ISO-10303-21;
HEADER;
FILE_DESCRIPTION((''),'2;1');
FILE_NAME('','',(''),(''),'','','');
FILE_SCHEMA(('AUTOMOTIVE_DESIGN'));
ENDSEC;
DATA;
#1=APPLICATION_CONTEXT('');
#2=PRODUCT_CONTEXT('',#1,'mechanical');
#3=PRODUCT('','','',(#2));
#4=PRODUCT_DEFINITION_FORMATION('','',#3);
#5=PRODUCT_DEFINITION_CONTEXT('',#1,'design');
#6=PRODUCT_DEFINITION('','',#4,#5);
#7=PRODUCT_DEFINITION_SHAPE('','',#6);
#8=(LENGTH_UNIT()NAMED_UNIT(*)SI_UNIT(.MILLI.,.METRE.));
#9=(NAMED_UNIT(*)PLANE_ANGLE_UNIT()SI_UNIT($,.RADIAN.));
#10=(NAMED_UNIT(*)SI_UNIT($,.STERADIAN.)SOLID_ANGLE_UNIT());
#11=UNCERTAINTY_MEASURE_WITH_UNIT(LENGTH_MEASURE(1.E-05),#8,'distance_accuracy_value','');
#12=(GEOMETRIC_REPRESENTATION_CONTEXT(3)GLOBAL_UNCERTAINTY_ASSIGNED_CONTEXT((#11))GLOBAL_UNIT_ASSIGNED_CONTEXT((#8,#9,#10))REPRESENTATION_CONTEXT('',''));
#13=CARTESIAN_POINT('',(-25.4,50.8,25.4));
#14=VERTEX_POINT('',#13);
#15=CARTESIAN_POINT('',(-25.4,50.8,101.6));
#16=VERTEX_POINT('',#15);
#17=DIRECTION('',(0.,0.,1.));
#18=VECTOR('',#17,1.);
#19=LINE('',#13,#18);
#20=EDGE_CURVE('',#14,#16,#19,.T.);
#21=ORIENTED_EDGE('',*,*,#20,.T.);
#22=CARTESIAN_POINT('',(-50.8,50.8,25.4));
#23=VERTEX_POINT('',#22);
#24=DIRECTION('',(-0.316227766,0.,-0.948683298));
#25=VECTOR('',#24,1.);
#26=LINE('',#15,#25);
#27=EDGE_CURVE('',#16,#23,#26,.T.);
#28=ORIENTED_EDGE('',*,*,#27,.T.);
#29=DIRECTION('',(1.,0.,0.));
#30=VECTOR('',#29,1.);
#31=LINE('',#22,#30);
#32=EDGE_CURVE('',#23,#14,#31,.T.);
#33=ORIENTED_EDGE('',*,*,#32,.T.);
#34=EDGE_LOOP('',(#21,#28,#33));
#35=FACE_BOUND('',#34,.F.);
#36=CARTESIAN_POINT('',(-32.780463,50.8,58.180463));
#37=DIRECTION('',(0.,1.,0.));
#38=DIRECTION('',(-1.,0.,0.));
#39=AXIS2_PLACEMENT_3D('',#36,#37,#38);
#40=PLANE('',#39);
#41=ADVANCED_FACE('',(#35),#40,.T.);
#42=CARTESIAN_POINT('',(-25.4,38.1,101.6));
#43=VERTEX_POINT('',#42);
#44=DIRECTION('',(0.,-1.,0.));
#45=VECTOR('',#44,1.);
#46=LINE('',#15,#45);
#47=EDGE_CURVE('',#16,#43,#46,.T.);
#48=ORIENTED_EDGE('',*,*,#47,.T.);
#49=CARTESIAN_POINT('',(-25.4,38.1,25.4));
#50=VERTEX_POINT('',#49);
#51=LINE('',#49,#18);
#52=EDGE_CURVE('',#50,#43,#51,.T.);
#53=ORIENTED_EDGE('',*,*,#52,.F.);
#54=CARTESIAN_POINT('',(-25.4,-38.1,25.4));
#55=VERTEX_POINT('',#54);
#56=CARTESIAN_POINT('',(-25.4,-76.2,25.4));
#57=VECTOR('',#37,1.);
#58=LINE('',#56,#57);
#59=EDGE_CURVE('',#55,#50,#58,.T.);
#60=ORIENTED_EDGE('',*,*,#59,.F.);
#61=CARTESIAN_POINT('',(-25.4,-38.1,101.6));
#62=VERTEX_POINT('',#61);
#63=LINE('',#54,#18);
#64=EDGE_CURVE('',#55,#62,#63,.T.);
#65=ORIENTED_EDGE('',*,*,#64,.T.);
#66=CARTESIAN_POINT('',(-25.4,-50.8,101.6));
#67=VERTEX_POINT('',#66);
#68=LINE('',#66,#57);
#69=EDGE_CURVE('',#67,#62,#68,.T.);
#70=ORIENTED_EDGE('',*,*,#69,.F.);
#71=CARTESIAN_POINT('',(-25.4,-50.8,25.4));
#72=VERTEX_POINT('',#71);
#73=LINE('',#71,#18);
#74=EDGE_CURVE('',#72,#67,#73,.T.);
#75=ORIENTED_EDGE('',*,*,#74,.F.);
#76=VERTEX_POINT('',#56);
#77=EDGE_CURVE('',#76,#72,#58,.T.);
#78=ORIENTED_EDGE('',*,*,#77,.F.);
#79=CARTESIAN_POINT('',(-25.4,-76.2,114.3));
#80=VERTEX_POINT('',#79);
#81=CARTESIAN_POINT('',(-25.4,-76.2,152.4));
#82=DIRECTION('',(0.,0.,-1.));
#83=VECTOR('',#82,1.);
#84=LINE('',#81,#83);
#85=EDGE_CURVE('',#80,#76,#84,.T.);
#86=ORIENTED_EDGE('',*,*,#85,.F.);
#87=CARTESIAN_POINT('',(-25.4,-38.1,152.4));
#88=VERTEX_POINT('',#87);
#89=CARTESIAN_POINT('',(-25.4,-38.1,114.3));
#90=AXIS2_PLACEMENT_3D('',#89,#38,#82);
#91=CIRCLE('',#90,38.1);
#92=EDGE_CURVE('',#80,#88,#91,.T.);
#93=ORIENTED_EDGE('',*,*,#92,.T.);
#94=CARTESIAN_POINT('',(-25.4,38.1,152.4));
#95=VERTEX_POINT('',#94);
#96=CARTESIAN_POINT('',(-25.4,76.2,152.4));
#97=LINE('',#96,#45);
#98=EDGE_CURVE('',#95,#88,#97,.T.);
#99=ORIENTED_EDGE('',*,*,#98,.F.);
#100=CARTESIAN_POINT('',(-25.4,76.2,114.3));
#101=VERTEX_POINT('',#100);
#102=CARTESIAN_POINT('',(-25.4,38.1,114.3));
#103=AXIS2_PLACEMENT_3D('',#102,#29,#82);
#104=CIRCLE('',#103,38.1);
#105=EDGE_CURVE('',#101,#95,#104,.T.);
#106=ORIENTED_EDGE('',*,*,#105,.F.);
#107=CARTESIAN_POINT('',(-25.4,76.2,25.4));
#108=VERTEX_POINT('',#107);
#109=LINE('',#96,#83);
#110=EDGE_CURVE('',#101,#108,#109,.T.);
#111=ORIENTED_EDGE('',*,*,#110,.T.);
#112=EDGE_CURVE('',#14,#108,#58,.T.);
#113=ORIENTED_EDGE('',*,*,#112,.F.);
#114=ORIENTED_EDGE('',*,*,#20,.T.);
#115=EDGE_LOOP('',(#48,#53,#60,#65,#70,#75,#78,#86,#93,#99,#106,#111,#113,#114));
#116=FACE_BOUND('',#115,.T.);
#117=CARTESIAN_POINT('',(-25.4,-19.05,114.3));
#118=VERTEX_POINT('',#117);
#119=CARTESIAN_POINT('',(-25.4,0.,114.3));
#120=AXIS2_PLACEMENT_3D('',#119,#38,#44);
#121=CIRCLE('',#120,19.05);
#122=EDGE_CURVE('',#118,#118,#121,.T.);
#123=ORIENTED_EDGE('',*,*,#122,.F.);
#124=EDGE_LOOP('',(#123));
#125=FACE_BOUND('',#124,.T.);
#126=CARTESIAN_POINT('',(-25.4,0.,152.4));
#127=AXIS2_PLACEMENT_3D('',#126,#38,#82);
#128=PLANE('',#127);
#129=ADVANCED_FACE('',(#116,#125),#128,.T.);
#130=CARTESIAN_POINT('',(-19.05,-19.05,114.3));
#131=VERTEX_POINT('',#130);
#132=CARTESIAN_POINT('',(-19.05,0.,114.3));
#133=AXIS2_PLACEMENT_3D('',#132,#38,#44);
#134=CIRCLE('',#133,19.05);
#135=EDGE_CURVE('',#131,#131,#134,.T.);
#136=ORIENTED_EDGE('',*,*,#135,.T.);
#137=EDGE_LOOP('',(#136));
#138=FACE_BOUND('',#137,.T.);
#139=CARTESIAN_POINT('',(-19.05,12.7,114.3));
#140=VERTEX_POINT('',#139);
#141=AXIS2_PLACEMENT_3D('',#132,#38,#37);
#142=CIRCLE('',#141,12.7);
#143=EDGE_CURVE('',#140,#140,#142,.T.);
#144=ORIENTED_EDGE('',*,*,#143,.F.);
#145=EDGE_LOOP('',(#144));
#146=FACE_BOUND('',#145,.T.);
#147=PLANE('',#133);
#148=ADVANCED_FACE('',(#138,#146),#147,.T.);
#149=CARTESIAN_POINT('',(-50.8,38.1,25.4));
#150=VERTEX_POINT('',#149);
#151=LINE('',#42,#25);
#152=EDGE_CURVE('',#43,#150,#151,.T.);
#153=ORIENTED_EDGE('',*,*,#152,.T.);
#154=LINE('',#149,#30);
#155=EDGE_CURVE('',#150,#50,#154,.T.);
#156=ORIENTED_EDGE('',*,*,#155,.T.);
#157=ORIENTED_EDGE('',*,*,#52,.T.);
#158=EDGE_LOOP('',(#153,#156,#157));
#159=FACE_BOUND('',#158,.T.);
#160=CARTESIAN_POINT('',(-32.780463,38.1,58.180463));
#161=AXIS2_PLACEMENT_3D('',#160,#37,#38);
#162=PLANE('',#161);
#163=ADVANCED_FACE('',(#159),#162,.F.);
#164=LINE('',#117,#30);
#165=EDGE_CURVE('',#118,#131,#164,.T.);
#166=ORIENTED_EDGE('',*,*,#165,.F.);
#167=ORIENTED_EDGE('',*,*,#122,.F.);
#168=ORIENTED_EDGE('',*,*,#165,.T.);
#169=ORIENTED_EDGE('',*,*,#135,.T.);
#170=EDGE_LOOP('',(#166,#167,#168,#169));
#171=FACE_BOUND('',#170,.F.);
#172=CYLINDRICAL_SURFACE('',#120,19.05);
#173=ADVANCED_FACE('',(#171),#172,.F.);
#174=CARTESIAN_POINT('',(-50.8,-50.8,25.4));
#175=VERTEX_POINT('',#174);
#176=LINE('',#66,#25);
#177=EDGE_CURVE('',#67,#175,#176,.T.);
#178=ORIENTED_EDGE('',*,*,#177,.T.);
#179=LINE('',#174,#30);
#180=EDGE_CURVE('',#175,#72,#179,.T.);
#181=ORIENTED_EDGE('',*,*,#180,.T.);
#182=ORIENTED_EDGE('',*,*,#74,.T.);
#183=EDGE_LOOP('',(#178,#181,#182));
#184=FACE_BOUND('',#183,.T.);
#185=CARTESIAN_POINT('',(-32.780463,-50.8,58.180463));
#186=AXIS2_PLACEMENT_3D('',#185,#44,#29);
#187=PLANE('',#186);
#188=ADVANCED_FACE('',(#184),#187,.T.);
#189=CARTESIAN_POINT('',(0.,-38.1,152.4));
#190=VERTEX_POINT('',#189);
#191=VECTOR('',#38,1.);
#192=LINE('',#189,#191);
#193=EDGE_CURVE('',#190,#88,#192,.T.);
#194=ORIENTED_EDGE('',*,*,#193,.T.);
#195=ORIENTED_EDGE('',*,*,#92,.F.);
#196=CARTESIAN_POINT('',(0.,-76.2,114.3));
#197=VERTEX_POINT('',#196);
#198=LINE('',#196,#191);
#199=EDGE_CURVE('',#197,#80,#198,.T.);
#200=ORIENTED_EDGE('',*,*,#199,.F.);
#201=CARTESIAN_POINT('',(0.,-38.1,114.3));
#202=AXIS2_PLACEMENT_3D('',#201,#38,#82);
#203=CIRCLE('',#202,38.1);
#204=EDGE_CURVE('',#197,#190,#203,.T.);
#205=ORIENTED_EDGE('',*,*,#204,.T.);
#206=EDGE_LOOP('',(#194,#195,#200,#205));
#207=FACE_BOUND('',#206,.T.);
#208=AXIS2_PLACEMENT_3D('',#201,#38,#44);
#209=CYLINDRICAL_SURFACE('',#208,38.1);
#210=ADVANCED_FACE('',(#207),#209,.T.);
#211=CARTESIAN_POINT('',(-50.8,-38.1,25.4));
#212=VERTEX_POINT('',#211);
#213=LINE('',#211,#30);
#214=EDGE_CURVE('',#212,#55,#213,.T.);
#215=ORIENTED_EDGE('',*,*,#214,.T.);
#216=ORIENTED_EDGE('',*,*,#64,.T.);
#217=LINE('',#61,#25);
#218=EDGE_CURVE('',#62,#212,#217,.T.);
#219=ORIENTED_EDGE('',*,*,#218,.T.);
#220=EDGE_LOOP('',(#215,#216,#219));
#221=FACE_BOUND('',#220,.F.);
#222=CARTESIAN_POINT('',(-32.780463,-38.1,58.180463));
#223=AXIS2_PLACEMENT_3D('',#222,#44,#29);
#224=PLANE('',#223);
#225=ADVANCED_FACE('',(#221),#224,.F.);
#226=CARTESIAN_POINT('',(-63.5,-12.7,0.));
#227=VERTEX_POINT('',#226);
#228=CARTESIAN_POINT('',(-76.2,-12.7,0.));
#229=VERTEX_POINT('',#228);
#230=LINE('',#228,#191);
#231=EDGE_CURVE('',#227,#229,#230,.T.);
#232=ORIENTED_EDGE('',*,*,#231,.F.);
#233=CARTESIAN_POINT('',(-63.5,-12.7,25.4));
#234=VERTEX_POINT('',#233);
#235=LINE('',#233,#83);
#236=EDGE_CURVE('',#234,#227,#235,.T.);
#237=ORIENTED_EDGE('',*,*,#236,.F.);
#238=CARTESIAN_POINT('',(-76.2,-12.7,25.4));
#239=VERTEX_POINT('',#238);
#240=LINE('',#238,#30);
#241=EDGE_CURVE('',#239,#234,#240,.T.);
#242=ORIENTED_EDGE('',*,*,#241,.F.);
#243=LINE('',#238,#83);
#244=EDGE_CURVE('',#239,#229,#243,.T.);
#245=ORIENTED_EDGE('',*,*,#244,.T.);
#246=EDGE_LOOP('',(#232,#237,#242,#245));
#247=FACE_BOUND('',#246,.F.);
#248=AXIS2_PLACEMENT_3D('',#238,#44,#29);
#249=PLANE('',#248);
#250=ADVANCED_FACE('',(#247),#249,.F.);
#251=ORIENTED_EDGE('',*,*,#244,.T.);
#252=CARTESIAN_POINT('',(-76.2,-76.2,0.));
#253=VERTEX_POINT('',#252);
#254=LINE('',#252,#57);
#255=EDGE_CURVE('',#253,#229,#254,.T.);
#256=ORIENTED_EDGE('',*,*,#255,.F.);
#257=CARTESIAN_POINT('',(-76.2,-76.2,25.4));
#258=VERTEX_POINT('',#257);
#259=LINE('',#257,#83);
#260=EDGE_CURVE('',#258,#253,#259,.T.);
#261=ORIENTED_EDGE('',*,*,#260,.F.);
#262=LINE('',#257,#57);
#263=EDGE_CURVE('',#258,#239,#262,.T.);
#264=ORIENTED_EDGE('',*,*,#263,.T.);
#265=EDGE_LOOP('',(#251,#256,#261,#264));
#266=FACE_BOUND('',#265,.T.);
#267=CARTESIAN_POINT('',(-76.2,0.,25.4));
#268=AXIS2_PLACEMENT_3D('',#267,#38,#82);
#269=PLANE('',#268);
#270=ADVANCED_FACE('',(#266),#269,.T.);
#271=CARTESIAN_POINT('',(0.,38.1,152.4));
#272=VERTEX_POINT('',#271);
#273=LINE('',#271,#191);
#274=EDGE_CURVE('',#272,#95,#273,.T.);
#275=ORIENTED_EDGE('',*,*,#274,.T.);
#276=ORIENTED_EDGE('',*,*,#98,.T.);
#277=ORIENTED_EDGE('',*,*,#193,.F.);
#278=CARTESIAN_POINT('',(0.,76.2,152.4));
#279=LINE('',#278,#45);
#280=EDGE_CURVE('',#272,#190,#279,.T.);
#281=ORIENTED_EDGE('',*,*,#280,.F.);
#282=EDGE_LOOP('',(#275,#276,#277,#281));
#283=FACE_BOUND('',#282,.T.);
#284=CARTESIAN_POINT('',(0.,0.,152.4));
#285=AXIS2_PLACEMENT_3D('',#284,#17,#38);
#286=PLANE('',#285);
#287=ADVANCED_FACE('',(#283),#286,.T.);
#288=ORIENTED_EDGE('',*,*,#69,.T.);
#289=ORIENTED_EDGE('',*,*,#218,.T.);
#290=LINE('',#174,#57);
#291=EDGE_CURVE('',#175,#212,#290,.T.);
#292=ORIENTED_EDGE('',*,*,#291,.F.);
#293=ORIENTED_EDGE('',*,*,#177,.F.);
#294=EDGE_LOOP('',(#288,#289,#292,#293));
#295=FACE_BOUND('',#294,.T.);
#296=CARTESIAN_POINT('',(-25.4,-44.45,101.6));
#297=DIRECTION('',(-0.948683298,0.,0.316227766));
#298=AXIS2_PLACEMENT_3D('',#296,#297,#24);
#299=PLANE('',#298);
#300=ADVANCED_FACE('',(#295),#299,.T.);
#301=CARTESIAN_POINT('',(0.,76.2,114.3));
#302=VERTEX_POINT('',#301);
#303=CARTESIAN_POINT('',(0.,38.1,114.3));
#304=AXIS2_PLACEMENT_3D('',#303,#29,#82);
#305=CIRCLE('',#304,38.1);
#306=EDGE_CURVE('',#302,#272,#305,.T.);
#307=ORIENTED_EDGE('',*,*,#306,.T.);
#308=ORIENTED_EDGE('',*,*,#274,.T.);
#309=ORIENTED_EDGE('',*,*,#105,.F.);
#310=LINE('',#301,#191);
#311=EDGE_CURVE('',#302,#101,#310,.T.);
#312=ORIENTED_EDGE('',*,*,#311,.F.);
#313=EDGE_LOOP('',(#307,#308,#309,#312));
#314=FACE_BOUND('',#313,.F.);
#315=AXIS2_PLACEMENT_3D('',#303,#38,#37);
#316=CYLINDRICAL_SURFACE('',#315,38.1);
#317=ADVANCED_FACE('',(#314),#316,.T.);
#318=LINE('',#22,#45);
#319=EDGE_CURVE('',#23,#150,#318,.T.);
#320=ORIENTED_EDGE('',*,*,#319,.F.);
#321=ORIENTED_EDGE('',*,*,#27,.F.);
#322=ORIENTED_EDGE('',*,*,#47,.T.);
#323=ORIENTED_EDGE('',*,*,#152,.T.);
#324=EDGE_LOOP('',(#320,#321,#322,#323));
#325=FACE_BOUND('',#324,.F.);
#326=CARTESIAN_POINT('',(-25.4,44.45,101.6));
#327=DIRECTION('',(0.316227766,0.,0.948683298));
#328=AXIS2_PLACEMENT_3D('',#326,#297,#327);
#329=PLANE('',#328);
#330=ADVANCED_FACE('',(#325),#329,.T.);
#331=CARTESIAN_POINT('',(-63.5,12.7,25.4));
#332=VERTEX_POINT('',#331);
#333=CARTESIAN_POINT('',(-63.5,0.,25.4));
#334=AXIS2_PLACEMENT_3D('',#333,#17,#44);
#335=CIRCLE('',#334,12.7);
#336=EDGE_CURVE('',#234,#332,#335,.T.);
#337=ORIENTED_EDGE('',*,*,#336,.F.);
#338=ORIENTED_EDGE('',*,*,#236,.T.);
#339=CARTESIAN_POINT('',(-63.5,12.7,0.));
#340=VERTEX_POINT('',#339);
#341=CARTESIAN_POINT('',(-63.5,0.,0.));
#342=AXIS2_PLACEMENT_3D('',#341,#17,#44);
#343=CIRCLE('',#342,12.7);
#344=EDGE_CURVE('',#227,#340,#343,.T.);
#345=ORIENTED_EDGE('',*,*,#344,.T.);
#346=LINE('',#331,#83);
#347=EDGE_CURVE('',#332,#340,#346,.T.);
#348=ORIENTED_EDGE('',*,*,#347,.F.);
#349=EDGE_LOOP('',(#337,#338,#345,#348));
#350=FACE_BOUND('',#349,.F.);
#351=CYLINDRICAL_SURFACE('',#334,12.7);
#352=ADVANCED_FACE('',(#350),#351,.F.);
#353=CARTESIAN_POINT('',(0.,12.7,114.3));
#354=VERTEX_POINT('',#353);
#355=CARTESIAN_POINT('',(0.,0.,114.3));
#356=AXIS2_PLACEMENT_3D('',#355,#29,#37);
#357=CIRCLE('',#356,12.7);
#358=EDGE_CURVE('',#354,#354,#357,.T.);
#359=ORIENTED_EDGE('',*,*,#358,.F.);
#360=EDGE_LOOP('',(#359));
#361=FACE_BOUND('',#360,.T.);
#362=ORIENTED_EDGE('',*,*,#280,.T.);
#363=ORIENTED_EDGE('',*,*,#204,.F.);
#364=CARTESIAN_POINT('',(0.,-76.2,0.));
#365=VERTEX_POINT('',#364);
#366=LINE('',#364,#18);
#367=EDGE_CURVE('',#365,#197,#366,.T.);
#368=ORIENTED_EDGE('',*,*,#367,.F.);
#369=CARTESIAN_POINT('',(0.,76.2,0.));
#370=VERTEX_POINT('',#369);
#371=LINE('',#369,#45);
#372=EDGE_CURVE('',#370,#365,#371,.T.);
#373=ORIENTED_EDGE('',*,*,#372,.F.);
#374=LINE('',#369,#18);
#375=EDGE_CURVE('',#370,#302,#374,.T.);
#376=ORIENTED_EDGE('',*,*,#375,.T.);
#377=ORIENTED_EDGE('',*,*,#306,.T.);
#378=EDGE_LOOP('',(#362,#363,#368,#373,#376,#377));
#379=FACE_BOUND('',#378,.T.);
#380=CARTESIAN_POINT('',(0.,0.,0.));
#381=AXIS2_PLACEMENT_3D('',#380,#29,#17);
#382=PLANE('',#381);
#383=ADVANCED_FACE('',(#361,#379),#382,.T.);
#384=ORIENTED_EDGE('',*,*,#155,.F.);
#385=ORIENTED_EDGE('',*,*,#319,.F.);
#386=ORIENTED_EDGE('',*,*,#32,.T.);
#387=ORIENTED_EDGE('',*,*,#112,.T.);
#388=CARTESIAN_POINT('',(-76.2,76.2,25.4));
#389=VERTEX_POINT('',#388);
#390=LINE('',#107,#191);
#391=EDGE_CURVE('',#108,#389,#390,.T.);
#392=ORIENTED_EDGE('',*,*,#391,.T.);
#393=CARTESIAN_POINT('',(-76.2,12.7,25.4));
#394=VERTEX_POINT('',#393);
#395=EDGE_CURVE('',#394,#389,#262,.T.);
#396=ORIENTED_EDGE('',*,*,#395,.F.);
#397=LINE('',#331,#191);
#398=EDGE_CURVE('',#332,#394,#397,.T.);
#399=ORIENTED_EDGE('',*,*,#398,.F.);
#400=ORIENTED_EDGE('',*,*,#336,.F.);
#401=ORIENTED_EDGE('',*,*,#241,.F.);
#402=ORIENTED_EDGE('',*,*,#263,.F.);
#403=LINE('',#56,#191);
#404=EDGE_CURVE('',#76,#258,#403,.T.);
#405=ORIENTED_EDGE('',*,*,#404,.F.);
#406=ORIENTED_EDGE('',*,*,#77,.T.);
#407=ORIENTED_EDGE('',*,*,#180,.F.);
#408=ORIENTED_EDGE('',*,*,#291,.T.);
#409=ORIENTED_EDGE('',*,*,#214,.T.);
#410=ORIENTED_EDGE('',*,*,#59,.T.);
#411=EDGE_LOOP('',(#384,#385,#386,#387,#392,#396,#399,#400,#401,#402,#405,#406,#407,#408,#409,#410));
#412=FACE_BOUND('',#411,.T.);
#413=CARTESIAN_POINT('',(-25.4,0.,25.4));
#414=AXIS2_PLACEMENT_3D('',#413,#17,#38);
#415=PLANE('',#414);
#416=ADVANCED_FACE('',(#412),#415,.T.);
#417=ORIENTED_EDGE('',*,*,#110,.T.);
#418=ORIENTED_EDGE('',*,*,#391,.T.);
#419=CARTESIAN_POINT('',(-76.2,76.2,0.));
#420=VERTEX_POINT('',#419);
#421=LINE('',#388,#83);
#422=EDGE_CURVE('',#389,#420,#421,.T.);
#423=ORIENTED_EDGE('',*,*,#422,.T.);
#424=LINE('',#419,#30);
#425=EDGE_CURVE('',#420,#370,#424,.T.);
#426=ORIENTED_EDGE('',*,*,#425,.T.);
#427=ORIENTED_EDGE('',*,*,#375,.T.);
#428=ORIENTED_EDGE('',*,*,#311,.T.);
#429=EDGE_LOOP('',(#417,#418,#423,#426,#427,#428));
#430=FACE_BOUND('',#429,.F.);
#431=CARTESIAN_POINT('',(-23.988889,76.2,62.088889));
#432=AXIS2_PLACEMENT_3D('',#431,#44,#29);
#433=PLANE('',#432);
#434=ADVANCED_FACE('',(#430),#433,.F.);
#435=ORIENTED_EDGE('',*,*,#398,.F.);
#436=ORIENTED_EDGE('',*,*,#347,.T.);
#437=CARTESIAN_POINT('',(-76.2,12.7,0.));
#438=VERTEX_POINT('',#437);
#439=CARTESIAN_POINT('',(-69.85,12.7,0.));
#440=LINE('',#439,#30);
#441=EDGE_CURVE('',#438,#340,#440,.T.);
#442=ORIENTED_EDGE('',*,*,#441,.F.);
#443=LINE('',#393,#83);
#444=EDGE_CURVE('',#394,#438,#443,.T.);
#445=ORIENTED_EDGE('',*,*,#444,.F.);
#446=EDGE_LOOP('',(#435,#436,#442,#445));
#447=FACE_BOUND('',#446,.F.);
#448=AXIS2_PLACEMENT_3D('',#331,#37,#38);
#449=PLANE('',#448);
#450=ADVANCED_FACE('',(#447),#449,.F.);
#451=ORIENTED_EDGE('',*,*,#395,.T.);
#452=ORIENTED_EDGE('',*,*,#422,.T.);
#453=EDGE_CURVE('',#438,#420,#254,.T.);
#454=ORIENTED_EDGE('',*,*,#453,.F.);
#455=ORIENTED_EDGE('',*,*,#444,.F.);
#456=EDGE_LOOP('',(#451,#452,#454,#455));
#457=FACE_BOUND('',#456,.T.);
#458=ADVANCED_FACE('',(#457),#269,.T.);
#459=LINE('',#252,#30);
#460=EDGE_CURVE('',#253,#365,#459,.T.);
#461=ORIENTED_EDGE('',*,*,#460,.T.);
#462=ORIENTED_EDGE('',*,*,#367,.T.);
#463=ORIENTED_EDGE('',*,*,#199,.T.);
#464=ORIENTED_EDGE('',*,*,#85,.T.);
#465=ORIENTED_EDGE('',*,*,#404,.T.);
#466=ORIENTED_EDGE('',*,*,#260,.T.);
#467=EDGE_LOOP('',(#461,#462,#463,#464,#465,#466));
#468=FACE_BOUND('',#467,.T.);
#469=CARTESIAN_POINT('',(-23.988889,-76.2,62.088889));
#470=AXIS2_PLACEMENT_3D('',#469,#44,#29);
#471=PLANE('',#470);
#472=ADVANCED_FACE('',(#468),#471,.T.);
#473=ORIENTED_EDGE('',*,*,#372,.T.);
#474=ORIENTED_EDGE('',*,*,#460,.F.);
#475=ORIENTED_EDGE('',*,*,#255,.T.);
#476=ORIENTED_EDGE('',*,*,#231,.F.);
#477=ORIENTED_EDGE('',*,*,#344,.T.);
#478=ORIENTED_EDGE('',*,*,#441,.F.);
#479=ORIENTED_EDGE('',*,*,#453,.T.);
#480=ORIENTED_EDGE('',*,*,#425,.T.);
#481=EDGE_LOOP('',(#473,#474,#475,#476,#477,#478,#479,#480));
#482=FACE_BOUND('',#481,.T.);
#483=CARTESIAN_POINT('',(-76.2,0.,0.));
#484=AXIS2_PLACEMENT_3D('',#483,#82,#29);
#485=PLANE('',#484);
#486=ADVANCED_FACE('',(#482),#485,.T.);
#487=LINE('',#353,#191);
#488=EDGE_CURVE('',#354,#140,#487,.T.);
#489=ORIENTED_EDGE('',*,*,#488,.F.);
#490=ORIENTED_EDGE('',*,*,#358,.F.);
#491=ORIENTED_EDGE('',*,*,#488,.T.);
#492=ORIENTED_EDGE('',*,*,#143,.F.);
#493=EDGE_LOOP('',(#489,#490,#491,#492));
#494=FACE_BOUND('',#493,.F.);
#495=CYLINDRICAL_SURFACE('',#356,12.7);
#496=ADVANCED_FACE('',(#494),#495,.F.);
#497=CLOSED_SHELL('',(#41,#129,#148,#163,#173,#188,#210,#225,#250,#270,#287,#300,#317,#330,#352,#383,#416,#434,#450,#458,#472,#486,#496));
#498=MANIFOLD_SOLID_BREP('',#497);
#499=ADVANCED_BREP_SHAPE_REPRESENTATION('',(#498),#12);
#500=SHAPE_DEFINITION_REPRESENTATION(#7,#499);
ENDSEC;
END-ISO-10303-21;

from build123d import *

# Parameters (mm, degrees)
F1_DEPTH  = 76.2
F2_R      = 12.7
F3_DEPTH  = 76.201
F5_DEPTH  = 25.401
F6_R      = 38.1
F7_R      = 19.05
F7_R_2    = 12.7
F8_DEPTH  = 6.35
F11_DEPTH = 6.35


# Not quite as in the source:
# - a pattern or mirror of a feature is missing from the dataset's text; its kind, count and spacing are read off the source's solid


with BuildPart() as f1:
    # F0 (on Front) → F1 (new body, symmetric)
    with BuildSketch(Plane.XZ):
        Polygon((-76.2, 0), (0, 0), (0, 152.4), (-25.4, 152.4), (-25.4, 25.4), (-76.2, 25.4), align=None)
    extrude(amount=F1_DEPTH, both=True)

    # F2 (on face) → F3 (cut, through all)
    with BuildSketch(Plane.YZ):
        with Locations((0, 114.3)):
            Circle(F2_R)
    extrude(amount=-F3_DEPTH, mode=Mode.SUBTRACT)

    # F4 (on face) → F5 (cut, through all)
    with BuildSketch(Plane.XY.offset(25.4)):
        with BuildLine():
            Line((-63.5, 12.7), (-76.2, 12.7))
            Line((-76.2, 12.7), (-76.2, -12.7))
            Line((-76.2, -12.7), (-63.5, -12.7))
            ThreePointArc((-63.5, -12.7), (-50.8, 0), (-63.5, 12.7))
        make_face()
    extrude(amount=-F5_DEPTH, mode=Mode.SUBTRACT)

    # F6
    f6_edges = [f1.edges().sort_by_distance(p)[0] for p in [
        (-12.7, -76.2, 152.4),
        (-12.7, 76.2, 152.4),
    ]]
    fillet(f6_edges, radius=F6_R)

    # F7 (on face) → F8 (cut)
    with BuildSketch(Plane(origin=(-25.4, 0, 0), x_dir=(0, -1, 0), z_dir=(-1, 0, 0))):
        with Locations((0, 114.3)):
            Circle(F7_R)
        with Locations((0, 114.3)):
            Circle(F7_R_2, mode=Mode.SUBTRACT)
    extrude(amount=-F8_DEPTH, mode=Mode.SUBTRACT)

    # F10 (on offset) → F11 (join, symmetric)
    with BuildSketch(Plane.XZ.offset(44.45)):
        Polygon((-50.8, 25.4), (-25.4, 25.4), (-25.4, 101.6), align=None)
    f11 = extrude(amount=F11_DEPTH, both=True)

    # F11_copies: F11 across plane
    add(f11.mirror(Plane.ZX))


solid = f1.part
